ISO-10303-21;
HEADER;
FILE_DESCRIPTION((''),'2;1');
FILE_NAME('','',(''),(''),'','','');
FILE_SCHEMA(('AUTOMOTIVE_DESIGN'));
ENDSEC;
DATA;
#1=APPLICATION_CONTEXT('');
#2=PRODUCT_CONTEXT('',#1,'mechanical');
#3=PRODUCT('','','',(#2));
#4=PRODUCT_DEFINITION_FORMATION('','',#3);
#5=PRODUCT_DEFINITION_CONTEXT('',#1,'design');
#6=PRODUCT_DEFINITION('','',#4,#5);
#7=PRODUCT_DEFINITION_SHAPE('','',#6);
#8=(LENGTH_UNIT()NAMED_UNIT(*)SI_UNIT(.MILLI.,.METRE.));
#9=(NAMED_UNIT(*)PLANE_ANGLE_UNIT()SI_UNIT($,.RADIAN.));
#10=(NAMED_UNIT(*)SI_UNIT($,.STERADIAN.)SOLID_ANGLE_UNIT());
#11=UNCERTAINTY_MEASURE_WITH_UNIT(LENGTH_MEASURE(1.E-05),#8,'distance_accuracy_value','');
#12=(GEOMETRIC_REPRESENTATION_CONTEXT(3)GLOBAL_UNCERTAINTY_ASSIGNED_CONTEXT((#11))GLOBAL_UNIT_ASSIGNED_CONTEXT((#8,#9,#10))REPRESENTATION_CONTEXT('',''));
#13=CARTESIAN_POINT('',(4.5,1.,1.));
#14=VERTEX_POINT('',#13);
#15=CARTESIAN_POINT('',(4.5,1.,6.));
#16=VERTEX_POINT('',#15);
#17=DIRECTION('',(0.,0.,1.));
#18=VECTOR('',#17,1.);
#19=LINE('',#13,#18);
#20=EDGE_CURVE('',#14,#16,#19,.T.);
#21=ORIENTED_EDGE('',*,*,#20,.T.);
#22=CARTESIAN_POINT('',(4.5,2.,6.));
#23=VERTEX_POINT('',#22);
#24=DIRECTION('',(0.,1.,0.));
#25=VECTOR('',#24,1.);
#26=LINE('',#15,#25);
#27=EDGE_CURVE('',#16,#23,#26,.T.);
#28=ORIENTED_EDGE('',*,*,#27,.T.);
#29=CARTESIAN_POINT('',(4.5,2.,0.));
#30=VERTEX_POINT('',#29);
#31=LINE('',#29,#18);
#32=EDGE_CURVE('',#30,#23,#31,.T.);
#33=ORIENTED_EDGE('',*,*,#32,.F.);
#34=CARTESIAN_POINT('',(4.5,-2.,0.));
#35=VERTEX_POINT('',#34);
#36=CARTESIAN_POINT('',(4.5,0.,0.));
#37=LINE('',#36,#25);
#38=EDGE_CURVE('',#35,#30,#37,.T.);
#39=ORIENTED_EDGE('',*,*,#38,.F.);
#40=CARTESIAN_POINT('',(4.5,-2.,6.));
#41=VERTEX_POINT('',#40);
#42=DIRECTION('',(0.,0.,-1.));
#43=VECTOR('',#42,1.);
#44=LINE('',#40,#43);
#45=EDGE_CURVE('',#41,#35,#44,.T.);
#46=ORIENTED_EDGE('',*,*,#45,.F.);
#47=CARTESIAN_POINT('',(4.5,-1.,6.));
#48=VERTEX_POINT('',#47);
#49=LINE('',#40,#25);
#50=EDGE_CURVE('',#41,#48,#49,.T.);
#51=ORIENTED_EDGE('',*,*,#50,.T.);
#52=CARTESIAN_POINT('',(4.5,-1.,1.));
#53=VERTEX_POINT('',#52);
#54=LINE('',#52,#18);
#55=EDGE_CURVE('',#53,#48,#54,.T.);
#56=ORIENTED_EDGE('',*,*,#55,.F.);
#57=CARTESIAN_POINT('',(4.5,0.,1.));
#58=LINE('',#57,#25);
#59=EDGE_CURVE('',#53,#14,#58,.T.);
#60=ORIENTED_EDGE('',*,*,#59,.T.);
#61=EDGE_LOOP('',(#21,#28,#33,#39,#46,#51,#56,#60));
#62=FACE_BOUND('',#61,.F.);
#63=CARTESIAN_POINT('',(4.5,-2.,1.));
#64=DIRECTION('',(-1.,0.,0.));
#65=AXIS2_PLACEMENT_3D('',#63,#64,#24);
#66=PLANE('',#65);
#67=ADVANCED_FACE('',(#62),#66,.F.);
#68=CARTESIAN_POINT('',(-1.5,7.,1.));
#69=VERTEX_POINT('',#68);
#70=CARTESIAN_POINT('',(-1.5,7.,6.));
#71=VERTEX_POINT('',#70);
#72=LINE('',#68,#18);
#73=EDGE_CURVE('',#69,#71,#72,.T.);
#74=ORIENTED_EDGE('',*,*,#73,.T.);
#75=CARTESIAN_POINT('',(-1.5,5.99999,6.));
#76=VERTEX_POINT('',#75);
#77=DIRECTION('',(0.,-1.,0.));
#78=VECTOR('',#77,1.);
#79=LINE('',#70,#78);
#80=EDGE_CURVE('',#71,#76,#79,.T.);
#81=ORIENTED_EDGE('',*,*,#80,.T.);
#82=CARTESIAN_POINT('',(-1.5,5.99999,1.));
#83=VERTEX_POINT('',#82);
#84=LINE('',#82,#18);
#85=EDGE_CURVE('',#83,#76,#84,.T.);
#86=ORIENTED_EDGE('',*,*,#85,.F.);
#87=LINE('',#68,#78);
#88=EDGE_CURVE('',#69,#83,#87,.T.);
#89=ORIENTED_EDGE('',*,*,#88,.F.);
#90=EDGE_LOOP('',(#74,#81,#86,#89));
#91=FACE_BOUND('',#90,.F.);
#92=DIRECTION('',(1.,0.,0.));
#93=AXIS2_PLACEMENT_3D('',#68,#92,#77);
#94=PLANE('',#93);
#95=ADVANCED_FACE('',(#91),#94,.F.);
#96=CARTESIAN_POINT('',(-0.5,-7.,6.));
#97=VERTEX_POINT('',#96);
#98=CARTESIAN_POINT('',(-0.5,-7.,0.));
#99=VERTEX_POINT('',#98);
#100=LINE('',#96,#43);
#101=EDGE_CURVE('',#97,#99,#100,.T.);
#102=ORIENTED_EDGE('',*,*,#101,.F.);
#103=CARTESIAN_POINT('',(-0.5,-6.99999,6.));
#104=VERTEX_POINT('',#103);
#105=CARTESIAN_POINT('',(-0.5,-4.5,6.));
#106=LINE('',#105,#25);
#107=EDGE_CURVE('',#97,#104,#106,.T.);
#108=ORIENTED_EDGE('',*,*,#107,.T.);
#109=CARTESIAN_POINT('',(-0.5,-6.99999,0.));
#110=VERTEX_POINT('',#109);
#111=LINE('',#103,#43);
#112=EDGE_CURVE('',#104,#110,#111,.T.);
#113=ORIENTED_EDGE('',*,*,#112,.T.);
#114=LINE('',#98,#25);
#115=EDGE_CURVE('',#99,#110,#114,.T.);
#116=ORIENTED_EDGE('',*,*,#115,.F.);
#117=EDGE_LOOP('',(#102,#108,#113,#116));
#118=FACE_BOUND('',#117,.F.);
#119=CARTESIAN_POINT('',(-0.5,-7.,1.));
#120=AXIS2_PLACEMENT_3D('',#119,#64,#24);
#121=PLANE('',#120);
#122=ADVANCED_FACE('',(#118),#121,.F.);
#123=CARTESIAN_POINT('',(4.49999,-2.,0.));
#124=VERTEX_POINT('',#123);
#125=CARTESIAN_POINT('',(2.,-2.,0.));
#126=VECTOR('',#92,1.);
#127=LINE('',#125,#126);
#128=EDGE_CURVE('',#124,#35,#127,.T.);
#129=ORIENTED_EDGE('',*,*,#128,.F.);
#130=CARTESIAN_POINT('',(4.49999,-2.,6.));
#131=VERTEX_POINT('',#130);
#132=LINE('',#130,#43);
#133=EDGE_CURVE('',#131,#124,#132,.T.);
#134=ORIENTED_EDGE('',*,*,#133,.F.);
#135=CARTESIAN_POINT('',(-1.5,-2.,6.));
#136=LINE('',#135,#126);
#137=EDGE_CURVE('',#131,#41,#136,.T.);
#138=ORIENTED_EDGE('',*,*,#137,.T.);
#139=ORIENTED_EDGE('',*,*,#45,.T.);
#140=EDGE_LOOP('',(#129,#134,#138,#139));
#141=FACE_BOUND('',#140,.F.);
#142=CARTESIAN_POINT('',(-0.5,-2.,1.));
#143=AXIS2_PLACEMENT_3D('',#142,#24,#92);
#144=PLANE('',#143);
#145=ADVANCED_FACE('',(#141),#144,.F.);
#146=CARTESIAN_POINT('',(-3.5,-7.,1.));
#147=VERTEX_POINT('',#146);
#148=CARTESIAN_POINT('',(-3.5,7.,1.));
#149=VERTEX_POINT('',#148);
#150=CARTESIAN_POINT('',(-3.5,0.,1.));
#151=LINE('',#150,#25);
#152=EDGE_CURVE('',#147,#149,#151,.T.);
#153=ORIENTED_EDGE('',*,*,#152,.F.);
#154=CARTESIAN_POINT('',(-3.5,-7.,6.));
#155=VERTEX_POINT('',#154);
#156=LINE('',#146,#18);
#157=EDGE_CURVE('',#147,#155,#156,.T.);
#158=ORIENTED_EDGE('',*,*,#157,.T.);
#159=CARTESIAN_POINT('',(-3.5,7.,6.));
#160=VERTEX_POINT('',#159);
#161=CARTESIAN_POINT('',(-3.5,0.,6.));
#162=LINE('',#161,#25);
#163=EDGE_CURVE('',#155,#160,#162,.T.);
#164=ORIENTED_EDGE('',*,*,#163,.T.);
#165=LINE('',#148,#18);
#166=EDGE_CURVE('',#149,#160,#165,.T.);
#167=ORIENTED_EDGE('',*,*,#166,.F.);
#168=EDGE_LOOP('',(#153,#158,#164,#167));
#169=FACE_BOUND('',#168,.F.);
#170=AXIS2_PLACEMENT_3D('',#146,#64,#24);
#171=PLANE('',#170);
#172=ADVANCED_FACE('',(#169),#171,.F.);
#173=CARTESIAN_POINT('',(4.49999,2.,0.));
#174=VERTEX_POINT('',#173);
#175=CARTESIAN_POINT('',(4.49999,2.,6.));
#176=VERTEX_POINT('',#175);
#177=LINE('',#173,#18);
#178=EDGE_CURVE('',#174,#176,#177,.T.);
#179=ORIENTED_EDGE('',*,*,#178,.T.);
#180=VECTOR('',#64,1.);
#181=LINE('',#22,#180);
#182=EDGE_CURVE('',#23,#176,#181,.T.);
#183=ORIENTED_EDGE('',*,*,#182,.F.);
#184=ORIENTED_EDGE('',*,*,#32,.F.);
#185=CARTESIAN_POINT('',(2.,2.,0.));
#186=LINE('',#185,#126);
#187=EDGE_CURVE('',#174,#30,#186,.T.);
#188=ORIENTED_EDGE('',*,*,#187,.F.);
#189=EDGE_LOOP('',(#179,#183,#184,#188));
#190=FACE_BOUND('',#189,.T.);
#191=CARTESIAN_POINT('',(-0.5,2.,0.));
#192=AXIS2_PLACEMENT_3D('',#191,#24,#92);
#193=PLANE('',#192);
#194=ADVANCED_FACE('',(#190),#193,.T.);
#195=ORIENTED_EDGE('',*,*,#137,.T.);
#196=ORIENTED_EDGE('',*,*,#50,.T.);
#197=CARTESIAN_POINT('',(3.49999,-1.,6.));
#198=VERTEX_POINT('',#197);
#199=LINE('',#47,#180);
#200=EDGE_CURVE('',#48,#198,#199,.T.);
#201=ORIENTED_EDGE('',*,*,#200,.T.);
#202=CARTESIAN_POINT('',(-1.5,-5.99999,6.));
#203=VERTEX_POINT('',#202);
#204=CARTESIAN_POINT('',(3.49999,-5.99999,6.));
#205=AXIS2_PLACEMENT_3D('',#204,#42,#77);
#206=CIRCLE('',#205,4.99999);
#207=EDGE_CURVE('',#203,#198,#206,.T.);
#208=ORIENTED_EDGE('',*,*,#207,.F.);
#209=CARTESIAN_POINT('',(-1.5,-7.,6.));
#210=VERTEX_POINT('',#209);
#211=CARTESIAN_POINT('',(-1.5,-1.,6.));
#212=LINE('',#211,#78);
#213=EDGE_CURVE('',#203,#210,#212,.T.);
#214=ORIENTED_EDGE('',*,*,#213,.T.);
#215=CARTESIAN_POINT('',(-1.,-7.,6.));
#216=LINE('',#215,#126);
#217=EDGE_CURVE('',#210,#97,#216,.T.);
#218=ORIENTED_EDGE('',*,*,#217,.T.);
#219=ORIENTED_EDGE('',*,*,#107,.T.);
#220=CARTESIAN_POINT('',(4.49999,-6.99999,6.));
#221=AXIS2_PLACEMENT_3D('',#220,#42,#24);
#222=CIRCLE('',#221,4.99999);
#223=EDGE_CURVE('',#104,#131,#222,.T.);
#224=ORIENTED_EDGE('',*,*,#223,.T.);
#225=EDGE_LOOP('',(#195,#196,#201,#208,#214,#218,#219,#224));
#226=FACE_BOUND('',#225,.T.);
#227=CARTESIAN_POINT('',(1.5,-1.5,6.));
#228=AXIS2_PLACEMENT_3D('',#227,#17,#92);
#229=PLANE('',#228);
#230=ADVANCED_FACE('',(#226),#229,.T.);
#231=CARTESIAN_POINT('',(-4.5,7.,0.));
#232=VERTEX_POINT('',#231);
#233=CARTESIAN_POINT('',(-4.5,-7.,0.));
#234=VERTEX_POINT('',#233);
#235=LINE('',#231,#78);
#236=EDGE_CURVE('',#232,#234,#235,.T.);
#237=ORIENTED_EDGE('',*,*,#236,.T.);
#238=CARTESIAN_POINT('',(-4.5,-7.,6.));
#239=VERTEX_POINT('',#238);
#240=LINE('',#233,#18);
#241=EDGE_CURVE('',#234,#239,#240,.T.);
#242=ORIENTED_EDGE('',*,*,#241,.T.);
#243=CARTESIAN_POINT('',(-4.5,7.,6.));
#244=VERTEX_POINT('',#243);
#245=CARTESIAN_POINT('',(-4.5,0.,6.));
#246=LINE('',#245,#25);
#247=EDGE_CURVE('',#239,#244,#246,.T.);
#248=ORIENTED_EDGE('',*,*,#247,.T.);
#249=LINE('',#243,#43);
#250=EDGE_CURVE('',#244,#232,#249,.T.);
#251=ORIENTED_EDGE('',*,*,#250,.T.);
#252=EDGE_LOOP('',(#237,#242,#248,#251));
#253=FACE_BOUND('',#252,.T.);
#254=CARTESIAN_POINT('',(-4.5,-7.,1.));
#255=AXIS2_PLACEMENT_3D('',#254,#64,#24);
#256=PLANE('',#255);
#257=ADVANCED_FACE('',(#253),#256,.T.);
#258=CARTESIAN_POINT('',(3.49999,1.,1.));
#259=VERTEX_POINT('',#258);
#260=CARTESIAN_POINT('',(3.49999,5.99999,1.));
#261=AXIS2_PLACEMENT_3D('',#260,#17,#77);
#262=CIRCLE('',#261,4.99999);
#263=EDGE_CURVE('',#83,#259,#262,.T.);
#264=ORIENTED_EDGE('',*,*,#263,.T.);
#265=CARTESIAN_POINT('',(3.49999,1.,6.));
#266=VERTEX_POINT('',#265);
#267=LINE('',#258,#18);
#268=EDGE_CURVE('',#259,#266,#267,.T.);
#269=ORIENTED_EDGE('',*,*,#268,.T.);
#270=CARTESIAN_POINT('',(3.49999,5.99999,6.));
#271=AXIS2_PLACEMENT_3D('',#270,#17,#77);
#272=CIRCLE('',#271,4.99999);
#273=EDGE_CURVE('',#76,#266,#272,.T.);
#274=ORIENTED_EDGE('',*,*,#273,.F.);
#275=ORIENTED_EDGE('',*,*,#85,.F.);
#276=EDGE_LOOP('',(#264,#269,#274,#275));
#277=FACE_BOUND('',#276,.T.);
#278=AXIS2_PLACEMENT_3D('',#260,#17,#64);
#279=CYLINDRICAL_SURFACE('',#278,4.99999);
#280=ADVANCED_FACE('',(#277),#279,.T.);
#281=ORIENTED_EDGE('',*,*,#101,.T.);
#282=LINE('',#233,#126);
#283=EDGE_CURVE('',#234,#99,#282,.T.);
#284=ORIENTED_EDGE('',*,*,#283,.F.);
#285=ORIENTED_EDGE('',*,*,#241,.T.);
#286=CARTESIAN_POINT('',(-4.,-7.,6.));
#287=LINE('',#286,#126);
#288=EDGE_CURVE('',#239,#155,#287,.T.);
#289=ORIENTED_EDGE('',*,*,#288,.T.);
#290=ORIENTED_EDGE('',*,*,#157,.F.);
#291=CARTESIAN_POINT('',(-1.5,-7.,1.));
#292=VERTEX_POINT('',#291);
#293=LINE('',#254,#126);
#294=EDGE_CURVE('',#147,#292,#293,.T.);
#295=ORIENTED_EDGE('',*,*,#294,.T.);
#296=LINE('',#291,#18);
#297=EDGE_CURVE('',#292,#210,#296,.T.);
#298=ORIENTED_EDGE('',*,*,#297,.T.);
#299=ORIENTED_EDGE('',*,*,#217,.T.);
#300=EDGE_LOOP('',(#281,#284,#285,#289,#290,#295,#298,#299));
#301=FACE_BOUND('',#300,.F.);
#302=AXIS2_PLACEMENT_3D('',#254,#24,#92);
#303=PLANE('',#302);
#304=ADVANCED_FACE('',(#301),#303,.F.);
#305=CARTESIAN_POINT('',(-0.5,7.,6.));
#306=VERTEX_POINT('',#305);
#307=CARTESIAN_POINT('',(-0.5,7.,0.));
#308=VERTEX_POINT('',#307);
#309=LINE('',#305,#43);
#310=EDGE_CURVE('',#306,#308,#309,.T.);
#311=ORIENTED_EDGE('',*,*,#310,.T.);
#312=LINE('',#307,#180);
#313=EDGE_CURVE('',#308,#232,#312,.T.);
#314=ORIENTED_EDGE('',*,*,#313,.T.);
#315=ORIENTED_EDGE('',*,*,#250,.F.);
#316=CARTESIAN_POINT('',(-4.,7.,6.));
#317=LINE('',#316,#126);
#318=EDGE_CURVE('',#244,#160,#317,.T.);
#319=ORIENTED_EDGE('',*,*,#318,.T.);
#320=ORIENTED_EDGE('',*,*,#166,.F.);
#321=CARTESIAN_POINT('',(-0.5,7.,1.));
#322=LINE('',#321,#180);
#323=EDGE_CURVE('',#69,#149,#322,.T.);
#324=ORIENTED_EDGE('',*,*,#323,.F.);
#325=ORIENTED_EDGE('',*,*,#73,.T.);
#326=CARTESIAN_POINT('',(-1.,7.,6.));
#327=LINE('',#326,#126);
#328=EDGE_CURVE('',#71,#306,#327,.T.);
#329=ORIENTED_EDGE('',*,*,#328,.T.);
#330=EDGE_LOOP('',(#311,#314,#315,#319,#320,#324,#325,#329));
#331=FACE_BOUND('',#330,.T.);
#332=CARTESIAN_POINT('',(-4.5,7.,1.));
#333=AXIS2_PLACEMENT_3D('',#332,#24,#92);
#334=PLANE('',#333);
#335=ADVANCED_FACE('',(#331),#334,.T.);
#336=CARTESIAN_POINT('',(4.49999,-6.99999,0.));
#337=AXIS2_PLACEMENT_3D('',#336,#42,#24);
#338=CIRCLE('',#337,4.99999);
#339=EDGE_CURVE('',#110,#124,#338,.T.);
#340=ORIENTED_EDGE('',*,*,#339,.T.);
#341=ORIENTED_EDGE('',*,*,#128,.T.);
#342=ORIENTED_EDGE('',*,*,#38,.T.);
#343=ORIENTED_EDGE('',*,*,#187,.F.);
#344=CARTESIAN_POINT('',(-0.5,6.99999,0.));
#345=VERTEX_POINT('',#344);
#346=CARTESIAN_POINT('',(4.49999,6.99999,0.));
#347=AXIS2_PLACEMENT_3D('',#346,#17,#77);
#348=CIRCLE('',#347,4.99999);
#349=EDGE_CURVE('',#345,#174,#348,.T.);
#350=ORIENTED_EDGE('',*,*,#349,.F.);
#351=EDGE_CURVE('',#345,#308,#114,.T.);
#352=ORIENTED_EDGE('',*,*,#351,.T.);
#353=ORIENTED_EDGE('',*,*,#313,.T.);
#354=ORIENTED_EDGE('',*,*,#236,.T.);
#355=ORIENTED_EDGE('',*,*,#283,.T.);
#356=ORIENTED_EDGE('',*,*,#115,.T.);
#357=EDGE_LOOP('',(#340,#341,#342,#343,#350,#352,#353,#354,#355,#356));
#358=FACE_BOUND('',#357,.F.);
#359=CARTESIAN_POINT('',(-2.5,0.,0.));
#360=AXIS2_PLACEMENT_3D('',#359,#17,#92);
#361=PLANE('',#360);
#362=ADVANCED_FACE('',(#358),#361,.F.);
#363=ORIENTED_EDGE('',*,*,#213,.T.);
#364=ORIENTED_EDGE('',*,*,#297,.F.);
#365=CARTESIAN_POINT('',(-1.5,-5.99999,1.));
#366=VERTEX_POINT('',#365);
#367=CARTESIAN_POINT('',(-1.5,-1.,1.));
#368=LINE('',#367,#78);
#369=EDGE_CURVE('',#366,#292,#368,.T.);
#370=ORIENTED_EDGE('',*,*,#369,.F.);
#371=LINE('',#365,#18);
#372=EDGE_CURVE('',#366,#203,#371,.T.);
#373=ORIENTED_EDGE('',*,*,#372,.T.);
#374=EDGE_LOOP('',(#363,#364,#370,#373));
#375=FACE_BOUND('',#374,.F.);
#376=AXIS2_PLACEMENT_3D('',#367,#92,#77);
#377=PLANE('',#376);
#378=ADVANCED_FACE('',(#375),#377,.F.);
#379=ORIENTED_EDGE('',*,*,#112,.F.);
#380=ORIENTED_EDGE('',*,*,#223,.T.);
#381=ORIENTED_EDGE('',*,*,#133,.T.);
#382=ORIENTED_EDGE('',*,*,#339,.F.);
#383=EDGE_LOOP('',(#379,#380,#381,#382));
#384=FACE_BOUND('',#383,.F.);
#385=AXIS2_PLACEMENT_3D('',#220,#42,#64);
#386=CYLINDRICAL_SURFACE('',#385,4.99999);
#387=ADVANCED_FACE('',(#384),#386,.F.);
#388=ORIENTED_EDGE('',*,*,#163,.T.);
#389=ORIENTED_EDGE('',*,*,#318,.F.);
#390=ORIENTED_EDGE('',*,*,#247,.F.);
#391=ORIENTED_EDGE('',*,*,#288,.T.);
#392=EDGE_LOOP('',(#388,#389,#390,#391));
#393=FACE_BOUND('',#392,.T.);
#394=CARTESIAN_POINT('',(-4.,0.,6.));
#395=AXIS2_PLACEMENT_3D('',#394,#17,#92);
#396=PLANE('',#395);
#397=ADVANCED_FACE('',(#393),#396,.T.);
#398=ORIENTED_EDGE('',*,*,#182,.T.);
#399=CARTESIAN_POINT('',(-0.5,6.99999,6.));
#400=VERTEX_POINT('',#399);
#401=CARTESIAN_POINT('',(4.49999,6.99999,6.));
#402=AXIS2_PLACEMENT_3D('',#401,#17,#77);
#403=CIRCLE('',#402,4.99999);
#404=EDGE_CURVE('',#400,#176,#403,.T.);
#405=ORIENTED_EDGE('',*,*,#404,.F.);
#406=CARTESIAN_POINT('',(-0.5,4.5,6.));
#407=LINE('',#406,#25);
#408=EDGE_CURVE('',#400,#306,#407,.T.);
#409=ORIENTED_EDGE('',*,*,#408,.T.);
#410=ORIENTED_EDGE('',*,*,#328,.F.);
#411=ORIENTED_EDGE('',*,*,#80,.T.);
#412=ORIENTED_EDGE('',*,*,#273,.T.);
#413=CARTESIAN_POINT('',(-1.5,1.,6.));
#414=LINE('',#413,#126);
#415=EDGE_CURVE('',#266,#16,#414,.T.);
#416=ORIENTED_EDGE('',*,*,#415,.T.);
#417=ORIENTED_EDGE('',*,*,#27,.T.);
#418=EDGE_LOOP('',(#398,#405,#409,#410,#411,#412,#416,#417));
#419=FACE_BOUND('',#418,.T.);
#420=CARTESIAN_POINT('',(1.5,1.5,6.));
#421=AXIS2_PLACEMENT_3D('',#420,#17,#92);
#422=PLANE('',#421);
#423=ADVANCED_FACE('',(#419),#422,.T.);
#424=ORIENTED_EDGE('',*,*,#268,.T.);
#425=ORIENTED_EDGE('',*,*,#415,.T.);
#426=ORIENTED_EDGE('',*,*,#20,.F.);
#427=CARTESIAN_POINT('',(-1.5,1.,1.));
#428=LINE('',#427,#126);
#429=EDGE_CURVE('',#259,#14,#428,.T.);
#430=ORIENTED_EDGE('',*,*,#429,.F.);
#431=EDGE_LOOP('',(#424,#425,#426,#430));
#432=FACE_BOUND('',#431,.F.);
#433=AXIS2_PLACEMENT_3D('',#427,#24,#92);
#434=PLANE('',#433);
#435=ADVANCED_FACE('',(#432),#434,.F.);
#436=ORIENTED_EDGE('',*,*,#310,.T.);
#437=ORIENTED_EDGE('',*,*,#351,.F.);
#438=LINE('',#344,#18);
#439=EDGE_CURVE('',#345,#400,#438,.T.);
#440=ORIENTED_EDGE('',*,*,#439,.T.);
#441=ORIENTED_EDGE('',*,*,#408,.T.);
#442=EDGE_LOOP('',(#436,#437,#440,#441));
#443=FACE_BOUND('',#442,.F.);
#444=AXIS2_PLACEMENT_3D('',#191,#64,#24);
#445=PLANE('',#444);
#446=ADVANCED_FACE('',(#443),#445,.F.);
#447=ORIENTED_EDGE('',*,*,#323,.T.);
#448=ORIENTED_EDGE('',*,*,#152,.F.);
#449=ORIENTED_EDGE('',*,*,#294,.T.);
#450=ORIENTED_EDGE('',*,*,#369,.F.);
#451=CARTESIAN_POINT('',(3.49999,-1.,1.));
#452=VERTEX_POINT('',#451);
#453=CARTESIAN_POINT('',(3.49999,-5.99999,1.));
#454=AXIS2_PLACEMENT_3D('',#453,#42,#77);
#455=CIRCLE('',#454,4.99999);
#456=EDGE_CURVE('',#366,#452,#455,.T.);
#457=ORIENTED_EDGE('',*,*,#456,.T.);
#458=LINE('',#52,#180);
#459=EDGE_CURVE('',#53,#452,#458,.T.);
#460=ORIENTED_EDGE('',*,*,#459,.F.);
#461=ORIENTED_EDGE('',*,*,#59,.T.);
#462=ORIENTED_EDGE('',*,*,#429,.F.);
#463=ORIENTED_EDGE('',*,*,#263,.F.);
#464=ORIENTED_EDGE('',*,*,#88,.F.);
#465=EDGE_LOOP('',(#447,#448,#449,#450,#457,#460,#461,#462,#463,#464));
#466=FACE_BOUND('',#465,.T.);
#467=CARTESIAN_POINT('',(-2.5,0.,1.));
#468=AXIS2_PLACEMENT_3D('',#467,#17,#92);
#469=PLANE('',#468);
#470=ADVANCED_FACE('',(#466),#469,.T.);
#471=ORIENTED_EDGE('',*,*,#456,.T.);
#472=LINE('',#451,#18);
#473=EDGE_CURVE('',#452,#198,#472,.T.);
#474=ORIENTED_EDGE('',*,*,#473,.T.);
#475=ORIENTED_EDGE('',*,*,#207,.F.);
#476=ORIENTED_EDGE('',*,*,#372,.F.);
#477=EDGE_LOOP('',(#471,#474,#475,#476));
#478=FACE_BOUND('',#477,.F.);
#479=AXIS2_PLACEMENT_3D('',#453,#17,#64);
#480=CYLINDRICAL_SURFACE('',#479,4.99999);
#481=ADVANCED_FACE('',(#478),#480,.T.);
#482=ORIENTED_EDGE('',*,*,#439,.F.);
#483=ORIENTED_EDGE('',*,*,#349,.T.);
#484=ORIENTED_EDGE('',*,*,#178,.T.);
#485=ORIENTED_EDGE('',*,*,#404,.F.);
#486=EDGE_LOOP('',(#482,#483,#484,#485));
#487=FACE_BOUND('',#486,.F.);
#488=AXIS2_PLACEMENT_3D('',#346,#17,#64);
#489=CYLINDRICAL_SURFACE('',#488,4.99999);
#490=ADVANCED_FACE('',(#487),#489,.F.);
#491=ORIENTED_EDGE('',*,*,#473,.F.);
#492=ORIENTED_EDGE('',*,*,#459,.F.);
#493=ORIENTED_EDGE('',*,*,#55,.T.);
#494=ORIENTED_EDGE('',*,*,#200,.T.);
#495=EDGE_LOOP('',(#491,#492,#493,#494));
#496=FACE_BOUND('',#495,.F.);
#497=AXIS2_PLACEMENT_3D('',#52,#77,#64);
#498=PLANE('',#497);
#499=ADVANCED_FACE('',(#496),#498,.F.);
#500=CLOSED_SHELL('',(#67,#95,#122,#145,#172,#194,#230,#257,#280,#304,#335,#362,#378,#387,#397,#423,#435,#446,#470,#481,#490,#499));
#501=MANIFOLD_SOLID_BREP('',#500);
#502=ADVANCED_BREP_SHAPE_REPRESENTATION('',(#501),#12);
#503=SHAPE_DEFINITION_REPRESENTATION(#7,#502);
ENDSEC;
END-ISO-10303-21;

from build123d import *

# Parameters (mm, degrees)
F0_W     = 5
F0_H     = 4
F1_DEPTH = 1
F2_W     = 1
F2_H     = 5
F3_DEPTH = 5
F4_R     = 4.99999
F2_H_2   = 14
F5_DEPTH = 5


# Not quite as in the source:
# - a fillet or chamfer is up to 0.001 mm smaller than in the source, because OpenCascade refuses the exact size


with BuildPart() as f1:
    # F0 (on Top) → F1 (new body)
    with BuildSketch(Plane.XY):
        Polygon((-4.5, -7), (-0.5, -7), (-0.5, -2), (-0.5, 2), (-0.5, 7), (-4.5, 7), align=None)
        with Locations((2, 0)):
            Rectangle(F0_W, F0_H)
    extrude(amount=F1_DEPTH)

    # F2 (on face) → F3 (join)
    with BuildSketch(Plane.XY.offset(1)):
        Polygon((-0.5, -2), (4.5, -2), (4.5, -1), (-1.5, -1), (-1.5, -2), align=None)
        with Locations((-1, -4.5)):
            Rectangle(F2_W, F2_H)
        Polygon((-1.5, 1), (4.5, 1), (4.5, 2), (-0.5, 2), (-1.5, 2), align=None)
        with Locations((-1, 4.5)):
            Rectangle(F2_W, F2_H)
    extrude(amount=F3_DEPTH)

    # F4 (radius 5 in the source; OpenCascade refuses exactly that, so slightly less here)
    f4_edges = [f1.edges().sort_by_distance(p)[0] for p in [
        (-0.5, -2, 3),
        (-1.5, 1, 3.5),
        (-1.5, -1, 3.5),
        (-0.5, 2, 3),
    ]]
    fillet(f4_edges, radius=F4_R)

    # F2 (on face) → F5 (join)
    with BuildSketch(Plane.XY.offset(1)):
        with Locations((-4, 0)):
            Rectangle(F2_W, F2_H_2)
    extrude(amount=F5_DEPTH)


solid = f1.part
